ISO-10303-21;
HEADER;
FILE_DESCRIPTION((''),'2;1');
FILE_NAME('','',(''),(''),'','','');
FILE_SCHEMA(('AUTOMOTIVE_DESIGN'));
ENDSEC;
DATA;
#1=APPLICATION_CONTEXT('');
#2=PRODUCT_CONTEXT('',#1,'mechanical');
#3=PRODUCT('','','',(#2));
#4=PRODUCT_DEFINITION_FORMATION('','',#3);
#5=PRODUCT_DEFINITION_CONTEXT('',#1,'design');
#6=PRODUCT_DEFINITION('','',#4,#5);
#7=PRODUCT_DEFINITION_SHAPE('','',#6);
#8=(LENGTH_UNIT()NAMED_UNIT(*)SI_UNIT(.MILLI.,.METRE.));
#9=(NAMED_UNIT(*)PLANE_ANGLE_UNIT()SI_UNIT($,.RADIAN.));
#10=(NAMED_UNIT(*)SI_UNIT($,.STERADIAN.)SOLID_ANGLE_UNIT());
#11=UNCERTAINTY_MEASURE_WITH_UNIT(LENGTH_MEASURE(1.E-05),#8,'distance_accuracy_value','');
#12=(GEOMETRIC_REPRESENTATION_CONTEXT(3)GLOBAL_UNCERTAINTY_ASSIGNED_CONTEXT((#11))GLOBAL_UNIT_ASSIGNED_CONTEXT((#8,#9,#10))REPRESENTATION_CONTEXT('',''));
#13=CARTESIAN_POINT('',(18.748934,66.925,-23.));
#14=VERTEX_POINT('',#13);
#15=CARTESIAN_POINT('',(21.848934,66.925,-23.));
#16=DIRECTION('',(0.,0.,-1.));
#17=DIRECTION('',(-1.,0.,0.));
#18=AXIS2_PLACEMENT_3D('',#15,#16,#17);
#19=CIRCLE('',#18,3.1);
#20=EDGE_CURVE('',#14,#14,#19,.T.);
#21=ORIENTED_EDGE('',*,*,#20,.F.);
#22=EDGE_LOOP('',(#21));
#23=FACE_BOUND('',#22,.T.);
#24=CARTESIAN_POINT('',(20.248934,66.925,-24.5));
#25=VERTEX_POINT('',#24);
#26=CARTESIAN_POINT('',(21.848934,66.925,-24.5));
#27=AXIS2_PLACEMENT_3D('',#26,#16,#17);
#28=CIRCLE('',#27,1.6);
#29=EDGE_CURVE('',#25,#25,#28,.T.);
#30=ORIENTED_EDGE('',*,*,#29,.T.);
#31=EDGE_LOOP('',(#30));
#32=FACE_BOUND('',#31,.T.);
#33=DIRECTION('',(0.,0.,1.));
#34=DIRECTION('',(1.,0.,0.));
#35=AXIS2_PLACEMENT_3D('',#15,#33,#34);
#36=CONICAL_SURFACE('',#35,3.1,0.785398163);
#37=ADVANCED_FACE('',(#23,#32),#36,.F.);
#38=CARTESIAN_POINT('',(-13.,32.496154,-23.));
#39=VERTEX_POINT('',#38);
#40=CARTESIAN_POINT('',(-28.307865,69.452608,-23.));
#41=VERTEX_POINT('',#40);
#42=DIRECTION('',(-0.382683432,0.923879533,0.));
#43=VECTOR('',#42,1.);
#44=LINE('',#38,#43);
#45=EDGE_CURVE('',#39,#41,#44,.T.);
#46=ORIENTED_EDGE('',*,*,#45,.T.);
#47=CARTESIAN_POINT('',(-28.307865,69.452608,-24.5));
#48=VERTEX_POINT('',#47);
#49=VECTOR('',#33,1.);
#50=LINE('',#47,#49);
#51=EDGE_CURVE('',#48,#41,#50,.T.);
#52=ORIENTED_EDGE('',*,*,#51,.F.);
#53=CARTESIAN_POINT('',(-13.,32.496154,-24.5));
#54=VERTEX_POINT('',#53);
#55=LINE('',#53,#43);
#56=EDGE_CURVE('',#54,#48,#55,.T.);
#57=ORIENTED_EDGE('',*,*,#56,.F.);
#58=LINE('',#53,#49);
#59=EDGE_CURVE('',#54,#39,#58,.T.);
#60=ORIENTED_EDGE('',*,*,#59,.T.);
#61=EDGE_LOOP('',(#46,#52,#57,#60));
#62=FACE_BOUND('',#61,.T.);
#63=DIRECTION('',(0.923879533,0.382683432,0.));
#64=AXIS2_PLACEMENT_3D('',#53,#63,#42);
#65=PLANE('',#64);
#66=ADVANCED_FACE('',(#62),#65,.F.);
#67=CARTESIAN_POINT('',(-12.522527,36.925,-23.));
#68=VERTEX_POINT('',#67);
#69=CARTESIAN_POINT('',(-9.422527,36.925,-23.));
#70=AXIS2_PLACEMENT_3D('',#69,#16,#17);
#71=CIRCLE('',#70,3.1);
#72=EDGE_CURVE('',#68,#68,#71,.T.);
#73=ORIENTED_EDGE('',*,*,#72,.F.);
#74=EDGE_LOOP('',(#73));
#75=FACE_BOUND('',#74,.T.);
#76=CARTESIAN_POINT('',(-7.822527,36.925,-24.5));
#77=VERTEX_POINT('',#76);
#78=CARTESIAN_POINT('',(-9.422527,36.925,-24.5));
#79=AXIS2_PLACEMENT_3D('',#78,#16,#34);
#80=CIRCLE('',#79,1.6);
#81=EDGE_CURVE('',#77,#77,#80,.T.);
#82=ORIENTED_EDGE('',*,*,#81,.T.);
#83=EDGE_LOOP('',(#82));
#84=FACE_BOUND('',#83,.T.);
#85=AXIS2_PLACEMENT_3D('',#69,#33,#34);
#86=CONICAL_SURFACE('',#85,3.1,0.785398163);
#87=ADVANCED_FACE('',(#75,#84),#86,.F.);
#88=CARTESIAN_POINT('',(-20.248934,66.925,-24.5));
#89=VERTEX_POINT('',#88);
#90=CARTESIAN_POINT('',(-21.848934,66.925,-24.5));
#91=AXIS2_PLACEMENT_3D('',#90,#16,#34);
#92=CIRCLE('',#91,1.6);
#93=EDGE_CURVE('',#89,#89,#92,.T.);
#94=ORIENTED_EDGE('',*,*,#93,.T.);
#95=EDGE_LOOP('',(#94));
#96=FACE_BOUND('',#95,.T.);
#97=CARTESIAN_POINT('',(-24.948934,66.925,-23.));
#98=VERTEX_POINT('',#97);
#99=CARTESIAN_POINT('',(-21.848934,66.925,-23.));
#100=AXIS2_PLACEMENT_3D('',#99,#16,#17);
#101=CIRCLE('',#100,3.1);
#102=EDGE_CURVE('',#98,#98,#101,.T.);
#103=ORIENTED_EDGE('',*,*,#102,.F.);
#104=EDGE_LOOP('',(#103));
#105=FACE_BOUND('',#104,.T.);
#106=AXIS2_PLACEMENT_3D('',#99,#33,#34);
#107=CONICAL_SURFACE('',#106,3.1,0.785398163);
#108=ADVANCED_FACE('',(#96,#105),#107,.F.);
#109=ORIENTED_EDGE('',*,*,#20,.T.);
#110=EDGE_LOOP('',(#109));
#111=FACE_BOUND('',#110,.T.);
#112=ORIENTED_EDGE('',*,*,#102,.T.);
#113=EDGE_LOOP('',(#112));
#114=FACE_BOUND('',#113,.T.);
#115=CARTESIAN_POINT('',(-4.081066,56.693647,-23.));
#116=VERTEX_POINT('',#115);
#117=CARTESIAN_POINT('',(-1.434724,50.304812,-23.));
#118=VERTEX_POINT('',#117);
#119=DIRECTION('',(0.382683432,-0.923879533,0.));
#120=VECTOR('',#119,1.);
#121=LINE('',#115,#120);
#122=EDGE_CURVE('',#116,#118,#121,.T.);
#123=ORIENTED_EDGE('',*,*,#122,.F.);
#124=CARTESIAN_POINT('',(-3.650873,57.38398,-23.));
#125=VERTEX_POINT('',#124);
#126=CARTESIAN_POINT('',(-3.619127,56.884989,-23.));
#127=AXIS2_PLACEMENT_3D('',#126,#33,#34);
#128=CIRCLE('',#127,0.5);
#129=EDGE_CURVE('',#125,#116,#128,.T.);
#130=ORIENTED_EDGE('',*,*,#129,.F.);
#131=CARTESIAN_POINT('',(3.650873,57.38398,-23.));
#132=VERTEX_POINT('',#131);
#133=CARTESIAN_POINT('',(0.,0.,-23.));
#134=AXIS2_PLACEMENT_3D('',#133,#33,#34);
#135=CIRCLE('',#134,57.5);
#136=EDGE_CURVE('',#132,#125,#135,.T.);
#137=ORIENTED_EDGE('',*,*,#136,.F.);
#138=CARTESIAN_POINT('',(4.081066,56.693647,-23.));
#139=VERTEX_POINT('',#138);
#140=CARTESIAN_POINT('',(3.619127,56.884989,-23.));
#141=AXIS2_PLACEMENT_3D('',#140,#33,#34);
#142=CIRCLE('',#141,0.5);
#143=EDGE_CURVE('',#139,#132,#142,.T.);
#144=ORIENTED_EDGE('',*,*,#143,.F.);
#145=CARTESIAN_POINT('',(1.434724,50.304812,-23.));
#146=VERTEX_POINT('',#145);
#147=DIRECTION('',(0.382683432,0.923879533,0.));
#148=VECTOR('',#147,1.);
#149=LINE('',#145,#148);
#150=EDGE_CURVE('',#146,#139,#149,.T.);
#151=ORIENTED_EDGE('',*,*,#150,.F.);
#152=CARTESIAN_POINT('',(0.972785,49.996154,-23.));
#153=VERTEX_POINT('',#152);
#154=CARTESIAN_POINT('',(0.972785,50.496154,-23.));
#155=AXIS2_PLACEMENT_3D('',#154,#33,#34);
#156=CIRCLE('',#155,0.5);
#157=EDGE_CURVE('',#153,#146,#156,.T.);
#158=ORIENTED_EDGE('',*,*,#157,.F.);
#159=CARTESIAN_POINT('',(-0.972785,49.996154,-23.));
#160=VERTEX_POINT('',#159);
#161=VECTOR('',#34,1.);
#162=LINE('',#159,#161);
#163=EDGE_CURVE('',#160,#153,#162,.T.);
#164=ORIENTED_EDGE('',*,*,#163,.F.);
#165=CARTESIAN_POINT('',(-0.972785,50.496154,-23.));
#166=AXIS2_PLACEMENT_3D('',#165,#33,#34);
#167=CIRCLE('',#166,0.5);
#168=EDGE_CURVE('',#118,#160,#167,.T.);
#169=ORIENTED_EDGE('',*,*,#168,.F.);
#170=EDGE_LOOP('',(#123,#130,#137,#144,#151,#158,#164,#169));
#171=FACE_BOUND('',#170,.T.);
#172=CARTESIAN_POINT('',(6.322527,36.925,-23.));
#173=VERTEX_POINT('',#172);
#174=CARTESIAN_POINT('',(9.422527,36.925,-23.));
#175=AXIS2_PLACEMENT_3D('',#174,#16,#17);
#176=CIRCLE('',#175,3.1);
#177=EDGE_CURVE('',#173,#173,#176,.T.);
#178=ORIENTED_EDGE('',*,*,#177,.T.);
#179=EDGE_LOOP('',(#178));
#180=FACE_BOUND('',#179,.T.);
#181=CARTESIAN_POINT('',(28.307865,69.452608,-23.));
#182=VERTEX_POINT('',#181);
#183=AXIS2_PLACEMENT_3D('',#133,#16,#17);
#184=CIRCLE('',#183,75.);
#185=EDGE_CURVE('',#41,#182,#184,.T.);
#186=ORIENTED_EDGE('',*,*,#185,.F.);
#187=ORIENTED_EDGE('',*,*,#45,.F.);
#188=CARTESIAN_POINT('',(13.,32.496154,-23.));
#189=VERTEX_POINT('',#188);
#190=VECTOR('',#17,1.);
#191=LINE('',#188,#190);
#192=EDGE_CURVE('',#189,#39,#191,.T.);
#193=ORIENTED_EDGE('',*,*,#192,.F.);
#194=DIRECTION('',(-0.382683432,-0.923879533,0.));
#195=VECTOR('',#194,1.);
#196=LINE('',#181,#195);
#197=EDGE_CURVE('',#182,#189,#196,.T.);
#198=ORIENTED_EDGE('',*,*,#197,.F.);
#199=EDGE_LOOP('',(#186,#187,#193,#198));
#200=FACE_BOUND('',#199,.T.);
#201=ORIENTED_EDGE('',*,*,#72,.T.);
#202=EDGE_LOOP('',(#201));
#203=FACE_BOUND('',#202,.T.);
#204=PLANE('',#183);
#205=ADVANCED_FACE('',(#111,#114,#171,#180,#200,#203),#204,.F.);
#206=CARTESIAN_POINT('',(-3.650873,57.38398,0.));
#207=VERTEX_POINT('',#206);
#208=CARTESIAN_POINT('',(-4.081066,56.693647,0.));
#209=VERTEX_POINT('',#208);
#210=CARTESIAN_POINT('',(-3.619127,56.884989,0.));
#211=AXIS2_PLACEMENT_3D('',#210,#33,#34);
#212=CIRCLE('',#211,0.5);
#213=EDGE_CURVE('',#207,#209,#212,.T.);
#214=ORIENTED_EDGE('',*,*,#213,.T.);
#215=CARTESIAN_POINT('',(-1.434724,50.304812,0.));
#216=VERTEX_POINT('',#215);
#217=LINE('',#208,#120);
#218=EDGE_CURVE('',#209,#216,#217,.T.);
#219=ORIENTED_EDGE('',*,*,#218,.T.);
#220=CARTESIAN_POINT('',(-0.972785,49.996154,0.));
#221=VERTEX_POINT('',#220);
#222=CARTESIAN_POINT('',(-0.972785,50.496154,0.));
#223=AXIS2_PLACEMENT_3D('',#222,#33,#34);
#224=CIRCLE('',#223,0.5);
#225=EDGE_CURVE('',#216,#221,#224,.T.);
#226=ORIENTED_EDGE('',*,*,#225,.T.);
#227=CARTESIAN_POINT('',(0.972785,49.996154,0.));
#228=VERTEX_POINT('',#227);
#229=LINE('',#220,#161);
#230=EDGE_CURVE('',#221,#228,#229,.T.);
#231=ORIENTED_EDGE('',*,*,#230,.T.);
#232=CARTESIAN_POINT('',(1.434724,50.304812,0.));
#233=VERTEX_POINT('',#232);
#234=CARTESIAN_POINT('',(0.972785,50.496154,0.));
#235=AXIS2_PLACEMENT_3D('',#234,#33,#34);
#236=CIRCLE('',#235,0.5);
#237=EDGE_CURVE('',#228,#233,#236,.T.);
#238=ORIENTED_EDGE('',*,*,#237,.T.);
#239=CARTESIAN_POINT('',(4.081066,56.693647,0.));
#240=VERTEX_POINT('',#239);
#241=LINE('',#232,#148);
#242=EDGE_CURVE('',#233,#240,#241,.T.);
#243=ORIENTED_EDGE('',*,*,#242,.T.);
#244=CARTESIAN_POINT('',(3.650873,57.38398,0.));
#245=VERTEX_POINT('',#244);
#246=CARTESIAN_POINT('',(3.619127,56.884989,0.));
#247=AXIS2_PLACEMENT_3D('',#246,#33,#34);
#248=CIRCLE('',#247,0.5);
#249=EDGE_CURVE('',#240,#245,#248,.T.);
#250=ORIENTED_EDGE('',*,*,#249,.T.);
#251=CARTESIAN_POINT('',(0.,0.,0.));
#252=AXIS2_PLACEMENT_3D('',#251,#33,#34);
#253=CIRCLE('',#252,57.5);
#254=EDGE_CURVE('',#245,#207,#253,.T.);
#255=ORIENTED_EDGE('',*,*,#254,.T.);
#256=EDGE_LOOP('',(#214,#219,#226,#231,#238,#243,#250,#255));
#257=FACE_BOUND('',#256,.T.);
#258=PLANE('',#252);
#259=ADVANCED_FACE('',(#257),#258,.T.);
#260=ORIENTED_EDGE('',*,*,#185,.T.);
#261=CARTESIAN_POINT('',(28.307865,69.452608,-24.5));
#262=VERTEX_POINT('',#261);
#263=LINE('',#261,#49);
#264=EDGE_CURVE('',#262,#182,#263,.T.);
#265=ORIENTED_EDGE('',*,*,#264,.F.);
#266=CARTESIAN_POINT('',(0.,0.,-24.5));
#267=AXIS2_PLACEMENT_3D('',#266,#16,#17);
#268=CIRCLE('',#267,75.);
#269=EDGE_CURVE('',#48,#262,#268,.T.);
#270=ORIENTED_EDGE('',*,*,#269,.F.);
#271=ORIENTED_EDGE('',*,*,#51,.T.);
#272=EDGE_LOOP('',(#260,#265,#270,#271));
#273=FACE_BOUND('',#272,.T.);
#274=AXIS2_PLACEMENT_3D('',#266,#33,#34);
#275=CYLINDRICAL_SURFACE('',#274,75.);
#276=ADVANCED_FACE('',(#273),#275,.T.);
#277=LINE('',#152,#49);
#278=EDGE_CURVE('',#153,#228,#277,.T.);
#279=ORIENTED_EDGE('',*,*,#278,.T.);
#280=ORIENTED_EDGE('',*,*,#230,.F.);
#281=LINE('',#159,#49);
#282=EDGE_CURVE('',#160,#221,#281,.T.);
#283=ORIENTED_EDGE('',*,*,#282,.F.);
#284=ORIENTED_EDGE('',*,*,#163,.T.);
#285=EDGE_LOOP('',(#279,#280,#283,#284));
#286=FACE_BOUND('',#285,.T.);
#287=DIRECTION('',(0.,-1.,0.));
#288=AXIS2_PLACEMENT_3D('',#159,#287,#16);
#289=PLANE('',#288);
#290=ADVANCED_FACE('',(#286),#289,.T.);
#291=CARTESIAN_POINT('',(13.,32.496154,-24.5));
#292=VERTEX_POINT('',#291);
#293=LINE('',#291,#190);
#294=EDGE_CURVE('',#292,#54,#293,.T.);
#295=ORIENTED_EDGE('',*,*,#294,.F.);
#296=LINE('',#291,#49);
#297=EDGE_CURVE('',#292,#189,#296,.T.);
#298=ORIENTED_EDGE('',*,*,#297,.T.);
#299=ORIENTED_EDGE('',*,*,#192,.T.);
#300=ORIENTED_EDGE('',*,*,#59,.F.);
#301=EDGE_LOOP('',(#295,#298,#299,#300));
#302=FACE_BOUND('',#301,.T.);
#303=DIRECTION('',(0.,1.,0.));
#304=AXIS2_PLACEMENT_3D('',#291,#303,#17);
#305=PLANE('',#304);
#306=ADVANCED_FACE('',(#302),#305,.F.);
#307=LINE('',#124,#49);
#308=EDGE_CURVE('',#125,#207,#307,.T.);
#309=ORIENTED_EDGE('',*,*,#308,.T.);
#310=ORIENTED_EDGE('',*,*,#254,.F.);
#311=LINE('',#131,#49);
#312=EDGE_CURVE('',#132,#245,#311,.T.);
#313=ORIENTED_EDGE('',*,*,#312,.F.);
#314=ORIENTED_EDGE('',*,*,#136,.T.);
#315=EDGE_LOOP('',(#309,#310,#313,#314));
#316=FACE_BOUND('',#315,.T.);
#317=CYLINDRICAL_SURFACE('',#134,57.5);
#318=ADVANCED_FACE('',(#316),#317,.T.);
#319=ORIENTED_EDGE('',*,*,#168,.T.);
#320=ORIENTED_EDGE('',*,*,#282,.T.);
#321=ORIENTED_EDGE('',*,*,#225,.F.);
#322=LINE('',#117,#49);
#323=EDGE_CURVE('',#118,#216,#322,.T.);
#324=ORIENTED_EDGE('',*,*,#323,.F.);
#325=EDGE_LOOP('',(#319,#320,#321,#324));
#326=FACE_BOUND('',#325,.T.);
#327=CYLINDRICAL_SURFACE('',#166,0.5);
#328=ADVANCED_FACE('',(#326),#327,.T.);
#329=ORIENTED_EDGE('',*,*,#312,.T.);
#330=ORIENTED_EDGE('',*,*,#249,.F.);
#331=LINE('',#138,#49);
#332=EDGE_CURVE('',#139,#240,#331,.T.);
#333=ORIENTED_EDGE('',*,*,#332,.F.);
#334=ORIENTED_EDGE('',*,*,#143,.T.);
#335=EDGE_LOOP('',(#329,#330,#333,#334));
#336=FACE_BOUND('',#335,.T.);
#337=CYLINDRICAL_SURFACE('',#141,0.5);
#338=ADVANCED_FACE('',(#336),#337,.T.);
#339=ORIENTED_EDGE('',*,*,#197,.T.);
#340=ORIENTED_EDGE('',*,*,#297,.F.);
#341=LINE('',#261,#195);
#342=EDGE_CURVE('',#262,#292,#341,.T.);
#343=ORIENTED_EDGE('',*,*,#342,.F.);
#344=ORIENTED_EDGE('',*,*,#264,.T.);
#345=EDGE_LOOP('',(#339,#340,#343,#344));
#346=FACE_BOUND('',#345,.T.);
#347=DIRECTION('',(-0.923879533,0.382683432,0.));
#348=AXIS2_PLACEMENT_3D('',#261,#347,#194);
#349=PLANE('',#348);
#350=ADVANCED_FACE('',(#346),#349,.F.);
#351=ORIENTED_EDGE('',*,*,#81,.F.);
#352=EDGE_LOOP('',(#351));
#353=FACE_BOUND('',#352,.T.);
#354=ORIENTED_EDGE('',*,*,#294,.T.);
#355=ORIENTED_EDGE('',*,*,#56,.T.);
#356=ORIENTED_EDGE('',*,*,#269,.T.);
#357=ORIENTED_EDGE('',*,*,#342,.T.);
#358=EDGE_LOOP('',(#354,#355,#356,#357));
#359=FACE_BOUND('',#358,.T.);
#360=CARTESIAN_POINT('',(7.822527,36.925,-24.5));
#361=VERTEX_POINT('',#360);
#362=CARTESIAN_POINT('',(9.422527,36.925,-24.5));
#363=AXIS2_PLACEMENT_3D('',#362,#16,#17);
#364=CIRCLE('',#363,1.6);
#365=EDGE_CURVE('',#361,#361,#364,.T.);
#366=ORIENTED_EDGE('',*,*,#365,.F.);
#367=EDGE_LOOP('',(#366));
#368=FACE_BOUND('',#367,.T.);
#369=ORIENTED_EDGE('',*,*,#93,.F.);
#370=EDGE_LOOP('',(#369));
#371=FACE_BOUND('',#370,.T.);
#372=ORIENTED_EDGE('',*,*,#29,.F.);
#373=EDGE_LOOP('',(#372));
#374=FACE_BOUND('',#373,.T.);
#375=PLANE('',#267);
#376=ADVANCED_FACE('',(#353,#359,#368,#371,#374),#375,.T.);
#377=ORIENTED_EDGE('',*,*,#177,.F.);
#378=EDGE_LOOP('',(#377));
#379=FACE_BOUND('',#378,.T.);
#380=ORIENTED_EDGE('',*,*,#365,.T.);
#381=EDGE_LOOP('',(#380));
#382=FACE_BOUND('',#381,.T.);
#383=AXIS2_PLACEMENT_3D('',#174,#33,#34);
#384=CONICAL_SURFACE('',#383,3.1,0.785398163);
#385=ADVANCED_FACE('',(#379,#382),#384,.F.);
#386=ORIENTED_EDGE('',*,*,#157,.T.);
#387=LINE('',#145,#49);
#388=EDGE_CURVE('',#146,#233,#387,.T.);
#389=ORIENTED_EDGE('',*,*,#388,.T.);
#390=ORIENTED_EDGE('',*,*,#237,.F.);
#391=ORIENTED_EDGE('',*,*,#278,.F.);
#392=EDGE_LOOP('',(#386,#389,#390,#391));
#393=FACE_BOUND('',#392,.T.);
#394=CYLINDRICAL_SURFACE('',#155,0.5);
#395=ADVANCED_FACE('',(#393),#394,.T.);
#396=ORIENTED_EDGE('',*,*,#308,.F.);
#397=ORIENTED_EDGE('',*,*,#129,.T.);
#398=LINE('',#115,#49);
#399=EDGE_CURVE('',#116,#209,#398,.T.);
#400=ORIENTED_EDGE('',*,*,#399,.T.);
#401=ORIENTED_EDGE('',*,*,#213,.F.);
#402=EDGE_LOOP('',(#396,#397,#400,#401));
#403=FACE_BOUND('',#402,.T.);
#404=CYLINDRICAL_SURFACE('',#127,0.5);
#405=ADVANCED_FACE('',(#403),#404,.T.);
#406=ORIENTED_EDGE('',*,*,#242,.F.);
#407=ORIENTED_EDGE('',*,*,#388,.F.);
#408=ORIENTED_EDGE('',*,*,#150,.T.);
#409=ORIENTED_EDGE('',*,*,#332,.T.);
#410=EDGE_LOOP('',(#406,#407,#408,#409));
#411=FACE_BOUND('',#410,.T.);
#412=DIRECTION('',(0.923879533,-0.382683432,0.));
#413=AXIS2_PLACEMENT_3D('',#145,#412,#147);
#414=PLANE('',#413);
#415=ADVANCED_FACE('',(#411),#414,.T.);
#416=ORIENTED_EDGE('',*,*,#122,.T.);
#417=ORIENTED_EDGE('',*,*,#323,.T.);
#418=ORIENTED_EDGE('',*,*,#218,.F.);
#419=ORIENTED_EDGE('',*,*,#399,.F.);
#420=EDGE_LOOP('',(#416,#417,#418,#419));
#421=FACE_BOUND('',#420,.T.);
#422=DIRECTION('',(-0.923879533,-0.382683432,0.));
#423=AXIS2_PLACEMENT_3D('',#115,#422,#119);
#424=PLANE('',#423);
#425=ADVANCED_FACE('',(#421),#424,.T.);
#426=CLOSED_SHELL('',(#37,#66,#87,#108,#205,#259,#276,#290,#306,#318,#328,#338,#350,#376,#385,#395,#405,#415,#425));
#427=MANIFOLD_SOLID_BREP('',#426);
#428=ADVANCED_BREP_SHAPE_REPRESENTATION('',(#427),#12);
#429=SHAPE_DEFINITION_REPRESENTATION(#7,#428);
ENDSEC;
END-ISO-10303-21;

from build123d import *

# Parameters (mm, degrees)
BOSS_EXTRUDE1_DEPTH = 23
SKETCH5_R           = 1.6
BOSS_EXTRUDE2_DEPTH = 1.5
CHAMFER1_SIZE       = 1.5


with BuildPart() as part:
    # Sketch1 → Boss-Extrude1 (new body)
    with BuildSketch(Plane.XY):
        with BuildLine():
            Line((-4.081066361, 56.693646837), (-1.434724284, 50.304811902))
            ThreePointArc((-1.434724284, 50.304811902), (-1.250569634, 50.080418812), (-0.972784517, 49.996153619))
            Line((-0.972784517, 49.996153619), (0.972784517, 49.996153619))
            ThreePointArc((0.972784517, 49.996153619), (1.250569634, 50.080418812), (1.434724284, 50.304811902))
            Line((1.434724284, 50.304811902), (4.081066361, 56.693646837))
            ThreePointArc((4.081066361, 56.693646837), (4.043474856, 57.149428628), (3.65087332, 57.383979681))
            ThreePointArc((3.65087332, 57.383979681), (0, 57.5), (-3.65087332, 57.383979681))
            ThreePointArc((-3.65087332, 57.383979681), (-4.043474856, 57.149428628), (-4.081066361, 56.693646837))
        make_face()
    extrude(amount=-BOSS_EXTRUDE1_DEPTH)

    # Sketch5 → Boss-Extrude2 (add)
    with BuildSketch(Plane(origin=(0, 0, -23), x_dir=(-1, 0, 0), z_dir=(0, 0, -1))):
        with BuildLine():
            Line((-28.307864731, 69.452608262), (-13, 32.496153619))
            Line((-13, 32.496153619), (13, 32.496153619))
            Line((13, 32.496153619), (28.307864731, 69.452608262))
            ThreePointArc((28.307864731, 69.452608262), (0, 75), (-28.307864731, 69.452608262))
        make_face()
        with Locations((-21.848934107, 66.925)):
            Circle(SKETCH5_R, mode=Mode.SUBTRACT)
        with Locations(Location((21.848934107, 66.925, 0), (0, 0, 180))):
            Circle(SKETCH5_R, mode=Mode.SUBTRACT)
        with Locations((-9.422527235, 36.925)):
            Circle(SKETCH5_R, mode=Mode.SUBTRACT)
        with Locations(Location((9.422527235, 36.925, 0), (0, 0, 180))):
            Circle(SKETCH5_R, mode=Mode.SUBTRACT)
    extrude(amount=BOSS_EXTRUDE2_DEPTH)

    # Chamfer1
    chamfer1_edges = [part.edges().sort_by_distance(p)[0] for p in [
        (23.448934107, 66.925, -23),
        (-23.448934107, 66.925, -23),
        (11.022527235, 36.925, -23),
        (-11.022527235, 36.925, -23),
    ]]
    chamfer(chamfer1_edges, length=CHAMFER1_SIZE - 0.0001)  # a hair under: the kernel refuses the full size


solid = part.part
